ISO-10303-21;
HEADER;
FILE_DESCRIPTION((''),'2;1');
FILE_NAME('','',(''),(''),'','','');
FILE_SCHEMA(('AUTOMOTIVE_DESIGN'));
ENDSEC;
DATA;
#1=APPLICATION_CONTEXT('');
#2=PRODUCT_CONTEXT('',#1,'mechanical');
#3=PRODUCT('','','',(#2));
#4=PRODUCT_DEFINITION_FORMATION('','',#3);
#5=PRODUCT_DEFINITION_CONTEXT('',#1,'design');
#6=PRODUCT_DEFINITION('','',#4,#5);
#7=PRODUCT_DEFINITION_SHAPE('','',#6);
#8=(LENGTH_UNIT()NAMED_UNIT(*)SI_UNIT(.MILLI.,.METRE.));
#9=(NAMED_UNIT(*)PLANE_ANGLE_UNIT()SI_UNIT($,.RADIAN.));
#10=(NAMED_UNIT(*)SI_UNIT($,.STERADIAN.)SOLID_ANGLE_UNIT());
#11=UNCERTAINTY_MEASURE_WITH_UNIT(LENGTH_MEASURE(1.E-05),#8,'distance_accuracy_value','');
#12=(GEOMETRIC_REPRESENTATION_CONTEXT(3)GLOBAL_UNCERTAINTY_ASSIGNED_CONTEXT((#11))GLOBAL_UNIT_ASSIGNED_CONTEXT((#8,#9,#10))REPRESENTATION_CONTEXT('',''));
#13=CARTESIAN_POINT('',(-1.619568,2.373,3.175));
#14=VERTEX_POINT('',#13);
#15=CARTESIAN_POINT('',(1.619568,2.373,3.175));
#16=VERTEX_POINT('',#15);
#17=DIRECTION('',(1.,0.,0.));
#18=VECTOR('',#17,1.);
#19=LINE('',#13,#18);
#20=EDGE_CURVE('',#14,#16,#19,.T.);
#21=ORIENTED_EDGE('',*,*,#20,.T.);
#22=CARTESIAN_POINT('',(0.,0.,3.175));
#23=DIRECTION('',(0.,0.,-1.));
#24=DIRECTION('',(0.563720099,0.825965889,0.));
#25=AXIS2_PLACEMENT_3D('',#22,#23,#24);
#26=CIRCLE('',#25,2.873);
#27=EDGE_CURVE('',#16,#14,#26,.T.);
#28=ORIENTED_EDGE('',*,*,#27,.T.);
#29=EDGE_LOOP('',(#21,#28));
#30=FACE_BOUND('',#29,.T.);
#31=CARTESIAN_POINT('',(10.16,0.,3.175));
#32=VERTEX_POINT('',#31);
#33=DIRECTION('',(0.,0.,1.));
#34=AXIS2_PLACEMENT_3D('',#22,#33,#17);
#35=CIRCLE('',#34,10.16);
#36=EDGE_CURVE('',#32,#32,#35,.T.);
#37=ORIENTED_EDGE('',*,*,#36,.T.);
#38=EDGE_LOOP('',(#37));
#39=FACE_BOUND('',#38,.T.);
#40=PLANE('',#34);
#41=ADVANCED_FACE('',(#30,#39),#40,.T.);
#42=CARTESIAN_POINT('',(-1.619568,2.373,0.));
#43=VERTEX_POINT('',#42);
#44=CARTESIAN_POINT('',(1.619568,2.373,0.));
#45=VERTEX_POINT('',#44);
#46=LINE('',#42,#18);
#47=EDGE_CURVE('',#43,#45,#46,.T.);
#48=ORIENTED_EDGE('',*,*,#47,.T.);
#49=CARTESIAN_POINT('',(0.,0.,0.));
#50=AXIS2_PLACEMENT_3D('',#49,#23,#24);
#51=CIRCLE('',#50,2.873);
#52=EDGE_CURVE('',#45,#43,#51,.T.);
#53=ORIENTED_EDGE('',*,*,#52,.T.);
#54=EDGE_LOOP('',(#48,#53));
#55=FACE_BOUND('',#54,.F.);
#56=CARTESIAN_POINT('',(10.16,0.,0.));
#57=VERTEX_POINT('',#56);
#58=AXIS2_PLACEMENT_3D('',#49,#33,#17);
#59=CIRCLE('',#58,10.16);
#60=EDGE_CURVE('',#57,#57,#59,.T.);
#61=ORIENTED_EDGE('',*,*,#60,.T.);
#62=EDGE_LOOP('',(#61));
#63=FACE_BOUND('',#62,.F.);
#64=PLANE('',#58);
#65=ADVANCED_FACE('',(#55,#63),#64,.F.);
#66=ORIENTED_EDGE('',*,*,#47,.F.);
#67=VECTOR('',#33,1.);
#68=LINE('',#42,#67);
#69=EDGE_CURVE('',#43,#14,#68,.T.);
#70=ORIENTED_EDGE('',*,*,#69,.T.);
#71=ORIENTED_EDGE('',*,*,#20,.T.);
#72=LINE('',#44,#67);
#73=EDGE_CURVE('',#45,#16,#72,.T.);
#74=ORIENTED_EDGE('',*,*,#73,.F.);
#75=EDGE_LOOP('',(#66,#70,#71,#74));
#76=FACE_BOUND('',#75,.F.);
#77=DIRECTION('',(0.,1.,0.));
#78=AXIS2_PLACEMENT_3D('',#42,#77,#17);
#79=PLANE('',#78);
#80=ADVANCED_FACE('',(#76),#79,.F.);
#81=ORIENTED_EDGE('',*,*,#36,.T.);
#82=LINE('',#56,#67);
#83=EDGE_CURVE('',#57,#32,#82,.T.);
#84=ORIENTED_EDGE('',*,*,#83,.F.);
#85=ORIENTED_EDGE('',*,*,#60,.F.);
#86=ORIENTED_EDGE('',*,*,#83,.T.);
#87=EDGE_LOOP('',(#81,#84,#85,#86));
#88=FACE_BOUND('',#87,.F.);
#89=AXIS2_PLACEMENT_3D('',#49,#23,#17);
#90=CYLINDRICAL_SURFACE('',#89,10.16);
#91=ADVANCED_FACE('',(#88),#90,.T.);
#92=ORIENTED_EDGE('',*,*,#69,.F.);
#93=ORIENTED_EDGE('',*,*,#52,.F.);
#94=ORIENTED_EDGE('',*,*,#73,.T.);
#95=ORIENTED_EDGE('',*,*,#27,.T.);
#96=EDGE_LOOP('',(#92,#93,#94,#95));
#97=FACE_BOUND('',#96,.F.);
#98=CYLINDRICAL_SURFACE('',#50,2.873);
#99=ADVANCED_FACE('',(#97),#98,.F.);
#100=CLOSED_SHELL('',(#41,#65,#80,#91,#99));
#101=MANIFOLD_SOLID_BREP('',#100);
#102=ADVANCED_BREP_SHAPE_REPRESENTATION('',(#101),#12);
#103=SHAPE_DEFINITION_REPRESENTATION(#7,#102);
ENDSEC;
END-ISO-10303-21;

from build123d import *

# Parameters (mm, degrees)
F1_R     = 10.16
F2_DEPTH = 3.175


# Not quite as in the source:
# - a variable given as a bare number and used for a length is read in inches; the dataset says mm whatever the document's units were


with BuildPart() as f2:
    # F1 (on Top) → F2 (new body)
    with BuildSketch(Plane.XY):
        Circle(F1_R)
        with BuildLine():
            ThreePointArc((1.6195678436, 2.373), (0, -2.873), (-1.6195678436, 2.373))
            Line((-1.6195678436, 2.373), (0, 2.373))
            Line((0, 2.373), (1.6195678436, 2.373))
        make_face(mode=Mode.SUBTRACT)
    extrude(amount=F2_DEPTH)


solid = f2.part
